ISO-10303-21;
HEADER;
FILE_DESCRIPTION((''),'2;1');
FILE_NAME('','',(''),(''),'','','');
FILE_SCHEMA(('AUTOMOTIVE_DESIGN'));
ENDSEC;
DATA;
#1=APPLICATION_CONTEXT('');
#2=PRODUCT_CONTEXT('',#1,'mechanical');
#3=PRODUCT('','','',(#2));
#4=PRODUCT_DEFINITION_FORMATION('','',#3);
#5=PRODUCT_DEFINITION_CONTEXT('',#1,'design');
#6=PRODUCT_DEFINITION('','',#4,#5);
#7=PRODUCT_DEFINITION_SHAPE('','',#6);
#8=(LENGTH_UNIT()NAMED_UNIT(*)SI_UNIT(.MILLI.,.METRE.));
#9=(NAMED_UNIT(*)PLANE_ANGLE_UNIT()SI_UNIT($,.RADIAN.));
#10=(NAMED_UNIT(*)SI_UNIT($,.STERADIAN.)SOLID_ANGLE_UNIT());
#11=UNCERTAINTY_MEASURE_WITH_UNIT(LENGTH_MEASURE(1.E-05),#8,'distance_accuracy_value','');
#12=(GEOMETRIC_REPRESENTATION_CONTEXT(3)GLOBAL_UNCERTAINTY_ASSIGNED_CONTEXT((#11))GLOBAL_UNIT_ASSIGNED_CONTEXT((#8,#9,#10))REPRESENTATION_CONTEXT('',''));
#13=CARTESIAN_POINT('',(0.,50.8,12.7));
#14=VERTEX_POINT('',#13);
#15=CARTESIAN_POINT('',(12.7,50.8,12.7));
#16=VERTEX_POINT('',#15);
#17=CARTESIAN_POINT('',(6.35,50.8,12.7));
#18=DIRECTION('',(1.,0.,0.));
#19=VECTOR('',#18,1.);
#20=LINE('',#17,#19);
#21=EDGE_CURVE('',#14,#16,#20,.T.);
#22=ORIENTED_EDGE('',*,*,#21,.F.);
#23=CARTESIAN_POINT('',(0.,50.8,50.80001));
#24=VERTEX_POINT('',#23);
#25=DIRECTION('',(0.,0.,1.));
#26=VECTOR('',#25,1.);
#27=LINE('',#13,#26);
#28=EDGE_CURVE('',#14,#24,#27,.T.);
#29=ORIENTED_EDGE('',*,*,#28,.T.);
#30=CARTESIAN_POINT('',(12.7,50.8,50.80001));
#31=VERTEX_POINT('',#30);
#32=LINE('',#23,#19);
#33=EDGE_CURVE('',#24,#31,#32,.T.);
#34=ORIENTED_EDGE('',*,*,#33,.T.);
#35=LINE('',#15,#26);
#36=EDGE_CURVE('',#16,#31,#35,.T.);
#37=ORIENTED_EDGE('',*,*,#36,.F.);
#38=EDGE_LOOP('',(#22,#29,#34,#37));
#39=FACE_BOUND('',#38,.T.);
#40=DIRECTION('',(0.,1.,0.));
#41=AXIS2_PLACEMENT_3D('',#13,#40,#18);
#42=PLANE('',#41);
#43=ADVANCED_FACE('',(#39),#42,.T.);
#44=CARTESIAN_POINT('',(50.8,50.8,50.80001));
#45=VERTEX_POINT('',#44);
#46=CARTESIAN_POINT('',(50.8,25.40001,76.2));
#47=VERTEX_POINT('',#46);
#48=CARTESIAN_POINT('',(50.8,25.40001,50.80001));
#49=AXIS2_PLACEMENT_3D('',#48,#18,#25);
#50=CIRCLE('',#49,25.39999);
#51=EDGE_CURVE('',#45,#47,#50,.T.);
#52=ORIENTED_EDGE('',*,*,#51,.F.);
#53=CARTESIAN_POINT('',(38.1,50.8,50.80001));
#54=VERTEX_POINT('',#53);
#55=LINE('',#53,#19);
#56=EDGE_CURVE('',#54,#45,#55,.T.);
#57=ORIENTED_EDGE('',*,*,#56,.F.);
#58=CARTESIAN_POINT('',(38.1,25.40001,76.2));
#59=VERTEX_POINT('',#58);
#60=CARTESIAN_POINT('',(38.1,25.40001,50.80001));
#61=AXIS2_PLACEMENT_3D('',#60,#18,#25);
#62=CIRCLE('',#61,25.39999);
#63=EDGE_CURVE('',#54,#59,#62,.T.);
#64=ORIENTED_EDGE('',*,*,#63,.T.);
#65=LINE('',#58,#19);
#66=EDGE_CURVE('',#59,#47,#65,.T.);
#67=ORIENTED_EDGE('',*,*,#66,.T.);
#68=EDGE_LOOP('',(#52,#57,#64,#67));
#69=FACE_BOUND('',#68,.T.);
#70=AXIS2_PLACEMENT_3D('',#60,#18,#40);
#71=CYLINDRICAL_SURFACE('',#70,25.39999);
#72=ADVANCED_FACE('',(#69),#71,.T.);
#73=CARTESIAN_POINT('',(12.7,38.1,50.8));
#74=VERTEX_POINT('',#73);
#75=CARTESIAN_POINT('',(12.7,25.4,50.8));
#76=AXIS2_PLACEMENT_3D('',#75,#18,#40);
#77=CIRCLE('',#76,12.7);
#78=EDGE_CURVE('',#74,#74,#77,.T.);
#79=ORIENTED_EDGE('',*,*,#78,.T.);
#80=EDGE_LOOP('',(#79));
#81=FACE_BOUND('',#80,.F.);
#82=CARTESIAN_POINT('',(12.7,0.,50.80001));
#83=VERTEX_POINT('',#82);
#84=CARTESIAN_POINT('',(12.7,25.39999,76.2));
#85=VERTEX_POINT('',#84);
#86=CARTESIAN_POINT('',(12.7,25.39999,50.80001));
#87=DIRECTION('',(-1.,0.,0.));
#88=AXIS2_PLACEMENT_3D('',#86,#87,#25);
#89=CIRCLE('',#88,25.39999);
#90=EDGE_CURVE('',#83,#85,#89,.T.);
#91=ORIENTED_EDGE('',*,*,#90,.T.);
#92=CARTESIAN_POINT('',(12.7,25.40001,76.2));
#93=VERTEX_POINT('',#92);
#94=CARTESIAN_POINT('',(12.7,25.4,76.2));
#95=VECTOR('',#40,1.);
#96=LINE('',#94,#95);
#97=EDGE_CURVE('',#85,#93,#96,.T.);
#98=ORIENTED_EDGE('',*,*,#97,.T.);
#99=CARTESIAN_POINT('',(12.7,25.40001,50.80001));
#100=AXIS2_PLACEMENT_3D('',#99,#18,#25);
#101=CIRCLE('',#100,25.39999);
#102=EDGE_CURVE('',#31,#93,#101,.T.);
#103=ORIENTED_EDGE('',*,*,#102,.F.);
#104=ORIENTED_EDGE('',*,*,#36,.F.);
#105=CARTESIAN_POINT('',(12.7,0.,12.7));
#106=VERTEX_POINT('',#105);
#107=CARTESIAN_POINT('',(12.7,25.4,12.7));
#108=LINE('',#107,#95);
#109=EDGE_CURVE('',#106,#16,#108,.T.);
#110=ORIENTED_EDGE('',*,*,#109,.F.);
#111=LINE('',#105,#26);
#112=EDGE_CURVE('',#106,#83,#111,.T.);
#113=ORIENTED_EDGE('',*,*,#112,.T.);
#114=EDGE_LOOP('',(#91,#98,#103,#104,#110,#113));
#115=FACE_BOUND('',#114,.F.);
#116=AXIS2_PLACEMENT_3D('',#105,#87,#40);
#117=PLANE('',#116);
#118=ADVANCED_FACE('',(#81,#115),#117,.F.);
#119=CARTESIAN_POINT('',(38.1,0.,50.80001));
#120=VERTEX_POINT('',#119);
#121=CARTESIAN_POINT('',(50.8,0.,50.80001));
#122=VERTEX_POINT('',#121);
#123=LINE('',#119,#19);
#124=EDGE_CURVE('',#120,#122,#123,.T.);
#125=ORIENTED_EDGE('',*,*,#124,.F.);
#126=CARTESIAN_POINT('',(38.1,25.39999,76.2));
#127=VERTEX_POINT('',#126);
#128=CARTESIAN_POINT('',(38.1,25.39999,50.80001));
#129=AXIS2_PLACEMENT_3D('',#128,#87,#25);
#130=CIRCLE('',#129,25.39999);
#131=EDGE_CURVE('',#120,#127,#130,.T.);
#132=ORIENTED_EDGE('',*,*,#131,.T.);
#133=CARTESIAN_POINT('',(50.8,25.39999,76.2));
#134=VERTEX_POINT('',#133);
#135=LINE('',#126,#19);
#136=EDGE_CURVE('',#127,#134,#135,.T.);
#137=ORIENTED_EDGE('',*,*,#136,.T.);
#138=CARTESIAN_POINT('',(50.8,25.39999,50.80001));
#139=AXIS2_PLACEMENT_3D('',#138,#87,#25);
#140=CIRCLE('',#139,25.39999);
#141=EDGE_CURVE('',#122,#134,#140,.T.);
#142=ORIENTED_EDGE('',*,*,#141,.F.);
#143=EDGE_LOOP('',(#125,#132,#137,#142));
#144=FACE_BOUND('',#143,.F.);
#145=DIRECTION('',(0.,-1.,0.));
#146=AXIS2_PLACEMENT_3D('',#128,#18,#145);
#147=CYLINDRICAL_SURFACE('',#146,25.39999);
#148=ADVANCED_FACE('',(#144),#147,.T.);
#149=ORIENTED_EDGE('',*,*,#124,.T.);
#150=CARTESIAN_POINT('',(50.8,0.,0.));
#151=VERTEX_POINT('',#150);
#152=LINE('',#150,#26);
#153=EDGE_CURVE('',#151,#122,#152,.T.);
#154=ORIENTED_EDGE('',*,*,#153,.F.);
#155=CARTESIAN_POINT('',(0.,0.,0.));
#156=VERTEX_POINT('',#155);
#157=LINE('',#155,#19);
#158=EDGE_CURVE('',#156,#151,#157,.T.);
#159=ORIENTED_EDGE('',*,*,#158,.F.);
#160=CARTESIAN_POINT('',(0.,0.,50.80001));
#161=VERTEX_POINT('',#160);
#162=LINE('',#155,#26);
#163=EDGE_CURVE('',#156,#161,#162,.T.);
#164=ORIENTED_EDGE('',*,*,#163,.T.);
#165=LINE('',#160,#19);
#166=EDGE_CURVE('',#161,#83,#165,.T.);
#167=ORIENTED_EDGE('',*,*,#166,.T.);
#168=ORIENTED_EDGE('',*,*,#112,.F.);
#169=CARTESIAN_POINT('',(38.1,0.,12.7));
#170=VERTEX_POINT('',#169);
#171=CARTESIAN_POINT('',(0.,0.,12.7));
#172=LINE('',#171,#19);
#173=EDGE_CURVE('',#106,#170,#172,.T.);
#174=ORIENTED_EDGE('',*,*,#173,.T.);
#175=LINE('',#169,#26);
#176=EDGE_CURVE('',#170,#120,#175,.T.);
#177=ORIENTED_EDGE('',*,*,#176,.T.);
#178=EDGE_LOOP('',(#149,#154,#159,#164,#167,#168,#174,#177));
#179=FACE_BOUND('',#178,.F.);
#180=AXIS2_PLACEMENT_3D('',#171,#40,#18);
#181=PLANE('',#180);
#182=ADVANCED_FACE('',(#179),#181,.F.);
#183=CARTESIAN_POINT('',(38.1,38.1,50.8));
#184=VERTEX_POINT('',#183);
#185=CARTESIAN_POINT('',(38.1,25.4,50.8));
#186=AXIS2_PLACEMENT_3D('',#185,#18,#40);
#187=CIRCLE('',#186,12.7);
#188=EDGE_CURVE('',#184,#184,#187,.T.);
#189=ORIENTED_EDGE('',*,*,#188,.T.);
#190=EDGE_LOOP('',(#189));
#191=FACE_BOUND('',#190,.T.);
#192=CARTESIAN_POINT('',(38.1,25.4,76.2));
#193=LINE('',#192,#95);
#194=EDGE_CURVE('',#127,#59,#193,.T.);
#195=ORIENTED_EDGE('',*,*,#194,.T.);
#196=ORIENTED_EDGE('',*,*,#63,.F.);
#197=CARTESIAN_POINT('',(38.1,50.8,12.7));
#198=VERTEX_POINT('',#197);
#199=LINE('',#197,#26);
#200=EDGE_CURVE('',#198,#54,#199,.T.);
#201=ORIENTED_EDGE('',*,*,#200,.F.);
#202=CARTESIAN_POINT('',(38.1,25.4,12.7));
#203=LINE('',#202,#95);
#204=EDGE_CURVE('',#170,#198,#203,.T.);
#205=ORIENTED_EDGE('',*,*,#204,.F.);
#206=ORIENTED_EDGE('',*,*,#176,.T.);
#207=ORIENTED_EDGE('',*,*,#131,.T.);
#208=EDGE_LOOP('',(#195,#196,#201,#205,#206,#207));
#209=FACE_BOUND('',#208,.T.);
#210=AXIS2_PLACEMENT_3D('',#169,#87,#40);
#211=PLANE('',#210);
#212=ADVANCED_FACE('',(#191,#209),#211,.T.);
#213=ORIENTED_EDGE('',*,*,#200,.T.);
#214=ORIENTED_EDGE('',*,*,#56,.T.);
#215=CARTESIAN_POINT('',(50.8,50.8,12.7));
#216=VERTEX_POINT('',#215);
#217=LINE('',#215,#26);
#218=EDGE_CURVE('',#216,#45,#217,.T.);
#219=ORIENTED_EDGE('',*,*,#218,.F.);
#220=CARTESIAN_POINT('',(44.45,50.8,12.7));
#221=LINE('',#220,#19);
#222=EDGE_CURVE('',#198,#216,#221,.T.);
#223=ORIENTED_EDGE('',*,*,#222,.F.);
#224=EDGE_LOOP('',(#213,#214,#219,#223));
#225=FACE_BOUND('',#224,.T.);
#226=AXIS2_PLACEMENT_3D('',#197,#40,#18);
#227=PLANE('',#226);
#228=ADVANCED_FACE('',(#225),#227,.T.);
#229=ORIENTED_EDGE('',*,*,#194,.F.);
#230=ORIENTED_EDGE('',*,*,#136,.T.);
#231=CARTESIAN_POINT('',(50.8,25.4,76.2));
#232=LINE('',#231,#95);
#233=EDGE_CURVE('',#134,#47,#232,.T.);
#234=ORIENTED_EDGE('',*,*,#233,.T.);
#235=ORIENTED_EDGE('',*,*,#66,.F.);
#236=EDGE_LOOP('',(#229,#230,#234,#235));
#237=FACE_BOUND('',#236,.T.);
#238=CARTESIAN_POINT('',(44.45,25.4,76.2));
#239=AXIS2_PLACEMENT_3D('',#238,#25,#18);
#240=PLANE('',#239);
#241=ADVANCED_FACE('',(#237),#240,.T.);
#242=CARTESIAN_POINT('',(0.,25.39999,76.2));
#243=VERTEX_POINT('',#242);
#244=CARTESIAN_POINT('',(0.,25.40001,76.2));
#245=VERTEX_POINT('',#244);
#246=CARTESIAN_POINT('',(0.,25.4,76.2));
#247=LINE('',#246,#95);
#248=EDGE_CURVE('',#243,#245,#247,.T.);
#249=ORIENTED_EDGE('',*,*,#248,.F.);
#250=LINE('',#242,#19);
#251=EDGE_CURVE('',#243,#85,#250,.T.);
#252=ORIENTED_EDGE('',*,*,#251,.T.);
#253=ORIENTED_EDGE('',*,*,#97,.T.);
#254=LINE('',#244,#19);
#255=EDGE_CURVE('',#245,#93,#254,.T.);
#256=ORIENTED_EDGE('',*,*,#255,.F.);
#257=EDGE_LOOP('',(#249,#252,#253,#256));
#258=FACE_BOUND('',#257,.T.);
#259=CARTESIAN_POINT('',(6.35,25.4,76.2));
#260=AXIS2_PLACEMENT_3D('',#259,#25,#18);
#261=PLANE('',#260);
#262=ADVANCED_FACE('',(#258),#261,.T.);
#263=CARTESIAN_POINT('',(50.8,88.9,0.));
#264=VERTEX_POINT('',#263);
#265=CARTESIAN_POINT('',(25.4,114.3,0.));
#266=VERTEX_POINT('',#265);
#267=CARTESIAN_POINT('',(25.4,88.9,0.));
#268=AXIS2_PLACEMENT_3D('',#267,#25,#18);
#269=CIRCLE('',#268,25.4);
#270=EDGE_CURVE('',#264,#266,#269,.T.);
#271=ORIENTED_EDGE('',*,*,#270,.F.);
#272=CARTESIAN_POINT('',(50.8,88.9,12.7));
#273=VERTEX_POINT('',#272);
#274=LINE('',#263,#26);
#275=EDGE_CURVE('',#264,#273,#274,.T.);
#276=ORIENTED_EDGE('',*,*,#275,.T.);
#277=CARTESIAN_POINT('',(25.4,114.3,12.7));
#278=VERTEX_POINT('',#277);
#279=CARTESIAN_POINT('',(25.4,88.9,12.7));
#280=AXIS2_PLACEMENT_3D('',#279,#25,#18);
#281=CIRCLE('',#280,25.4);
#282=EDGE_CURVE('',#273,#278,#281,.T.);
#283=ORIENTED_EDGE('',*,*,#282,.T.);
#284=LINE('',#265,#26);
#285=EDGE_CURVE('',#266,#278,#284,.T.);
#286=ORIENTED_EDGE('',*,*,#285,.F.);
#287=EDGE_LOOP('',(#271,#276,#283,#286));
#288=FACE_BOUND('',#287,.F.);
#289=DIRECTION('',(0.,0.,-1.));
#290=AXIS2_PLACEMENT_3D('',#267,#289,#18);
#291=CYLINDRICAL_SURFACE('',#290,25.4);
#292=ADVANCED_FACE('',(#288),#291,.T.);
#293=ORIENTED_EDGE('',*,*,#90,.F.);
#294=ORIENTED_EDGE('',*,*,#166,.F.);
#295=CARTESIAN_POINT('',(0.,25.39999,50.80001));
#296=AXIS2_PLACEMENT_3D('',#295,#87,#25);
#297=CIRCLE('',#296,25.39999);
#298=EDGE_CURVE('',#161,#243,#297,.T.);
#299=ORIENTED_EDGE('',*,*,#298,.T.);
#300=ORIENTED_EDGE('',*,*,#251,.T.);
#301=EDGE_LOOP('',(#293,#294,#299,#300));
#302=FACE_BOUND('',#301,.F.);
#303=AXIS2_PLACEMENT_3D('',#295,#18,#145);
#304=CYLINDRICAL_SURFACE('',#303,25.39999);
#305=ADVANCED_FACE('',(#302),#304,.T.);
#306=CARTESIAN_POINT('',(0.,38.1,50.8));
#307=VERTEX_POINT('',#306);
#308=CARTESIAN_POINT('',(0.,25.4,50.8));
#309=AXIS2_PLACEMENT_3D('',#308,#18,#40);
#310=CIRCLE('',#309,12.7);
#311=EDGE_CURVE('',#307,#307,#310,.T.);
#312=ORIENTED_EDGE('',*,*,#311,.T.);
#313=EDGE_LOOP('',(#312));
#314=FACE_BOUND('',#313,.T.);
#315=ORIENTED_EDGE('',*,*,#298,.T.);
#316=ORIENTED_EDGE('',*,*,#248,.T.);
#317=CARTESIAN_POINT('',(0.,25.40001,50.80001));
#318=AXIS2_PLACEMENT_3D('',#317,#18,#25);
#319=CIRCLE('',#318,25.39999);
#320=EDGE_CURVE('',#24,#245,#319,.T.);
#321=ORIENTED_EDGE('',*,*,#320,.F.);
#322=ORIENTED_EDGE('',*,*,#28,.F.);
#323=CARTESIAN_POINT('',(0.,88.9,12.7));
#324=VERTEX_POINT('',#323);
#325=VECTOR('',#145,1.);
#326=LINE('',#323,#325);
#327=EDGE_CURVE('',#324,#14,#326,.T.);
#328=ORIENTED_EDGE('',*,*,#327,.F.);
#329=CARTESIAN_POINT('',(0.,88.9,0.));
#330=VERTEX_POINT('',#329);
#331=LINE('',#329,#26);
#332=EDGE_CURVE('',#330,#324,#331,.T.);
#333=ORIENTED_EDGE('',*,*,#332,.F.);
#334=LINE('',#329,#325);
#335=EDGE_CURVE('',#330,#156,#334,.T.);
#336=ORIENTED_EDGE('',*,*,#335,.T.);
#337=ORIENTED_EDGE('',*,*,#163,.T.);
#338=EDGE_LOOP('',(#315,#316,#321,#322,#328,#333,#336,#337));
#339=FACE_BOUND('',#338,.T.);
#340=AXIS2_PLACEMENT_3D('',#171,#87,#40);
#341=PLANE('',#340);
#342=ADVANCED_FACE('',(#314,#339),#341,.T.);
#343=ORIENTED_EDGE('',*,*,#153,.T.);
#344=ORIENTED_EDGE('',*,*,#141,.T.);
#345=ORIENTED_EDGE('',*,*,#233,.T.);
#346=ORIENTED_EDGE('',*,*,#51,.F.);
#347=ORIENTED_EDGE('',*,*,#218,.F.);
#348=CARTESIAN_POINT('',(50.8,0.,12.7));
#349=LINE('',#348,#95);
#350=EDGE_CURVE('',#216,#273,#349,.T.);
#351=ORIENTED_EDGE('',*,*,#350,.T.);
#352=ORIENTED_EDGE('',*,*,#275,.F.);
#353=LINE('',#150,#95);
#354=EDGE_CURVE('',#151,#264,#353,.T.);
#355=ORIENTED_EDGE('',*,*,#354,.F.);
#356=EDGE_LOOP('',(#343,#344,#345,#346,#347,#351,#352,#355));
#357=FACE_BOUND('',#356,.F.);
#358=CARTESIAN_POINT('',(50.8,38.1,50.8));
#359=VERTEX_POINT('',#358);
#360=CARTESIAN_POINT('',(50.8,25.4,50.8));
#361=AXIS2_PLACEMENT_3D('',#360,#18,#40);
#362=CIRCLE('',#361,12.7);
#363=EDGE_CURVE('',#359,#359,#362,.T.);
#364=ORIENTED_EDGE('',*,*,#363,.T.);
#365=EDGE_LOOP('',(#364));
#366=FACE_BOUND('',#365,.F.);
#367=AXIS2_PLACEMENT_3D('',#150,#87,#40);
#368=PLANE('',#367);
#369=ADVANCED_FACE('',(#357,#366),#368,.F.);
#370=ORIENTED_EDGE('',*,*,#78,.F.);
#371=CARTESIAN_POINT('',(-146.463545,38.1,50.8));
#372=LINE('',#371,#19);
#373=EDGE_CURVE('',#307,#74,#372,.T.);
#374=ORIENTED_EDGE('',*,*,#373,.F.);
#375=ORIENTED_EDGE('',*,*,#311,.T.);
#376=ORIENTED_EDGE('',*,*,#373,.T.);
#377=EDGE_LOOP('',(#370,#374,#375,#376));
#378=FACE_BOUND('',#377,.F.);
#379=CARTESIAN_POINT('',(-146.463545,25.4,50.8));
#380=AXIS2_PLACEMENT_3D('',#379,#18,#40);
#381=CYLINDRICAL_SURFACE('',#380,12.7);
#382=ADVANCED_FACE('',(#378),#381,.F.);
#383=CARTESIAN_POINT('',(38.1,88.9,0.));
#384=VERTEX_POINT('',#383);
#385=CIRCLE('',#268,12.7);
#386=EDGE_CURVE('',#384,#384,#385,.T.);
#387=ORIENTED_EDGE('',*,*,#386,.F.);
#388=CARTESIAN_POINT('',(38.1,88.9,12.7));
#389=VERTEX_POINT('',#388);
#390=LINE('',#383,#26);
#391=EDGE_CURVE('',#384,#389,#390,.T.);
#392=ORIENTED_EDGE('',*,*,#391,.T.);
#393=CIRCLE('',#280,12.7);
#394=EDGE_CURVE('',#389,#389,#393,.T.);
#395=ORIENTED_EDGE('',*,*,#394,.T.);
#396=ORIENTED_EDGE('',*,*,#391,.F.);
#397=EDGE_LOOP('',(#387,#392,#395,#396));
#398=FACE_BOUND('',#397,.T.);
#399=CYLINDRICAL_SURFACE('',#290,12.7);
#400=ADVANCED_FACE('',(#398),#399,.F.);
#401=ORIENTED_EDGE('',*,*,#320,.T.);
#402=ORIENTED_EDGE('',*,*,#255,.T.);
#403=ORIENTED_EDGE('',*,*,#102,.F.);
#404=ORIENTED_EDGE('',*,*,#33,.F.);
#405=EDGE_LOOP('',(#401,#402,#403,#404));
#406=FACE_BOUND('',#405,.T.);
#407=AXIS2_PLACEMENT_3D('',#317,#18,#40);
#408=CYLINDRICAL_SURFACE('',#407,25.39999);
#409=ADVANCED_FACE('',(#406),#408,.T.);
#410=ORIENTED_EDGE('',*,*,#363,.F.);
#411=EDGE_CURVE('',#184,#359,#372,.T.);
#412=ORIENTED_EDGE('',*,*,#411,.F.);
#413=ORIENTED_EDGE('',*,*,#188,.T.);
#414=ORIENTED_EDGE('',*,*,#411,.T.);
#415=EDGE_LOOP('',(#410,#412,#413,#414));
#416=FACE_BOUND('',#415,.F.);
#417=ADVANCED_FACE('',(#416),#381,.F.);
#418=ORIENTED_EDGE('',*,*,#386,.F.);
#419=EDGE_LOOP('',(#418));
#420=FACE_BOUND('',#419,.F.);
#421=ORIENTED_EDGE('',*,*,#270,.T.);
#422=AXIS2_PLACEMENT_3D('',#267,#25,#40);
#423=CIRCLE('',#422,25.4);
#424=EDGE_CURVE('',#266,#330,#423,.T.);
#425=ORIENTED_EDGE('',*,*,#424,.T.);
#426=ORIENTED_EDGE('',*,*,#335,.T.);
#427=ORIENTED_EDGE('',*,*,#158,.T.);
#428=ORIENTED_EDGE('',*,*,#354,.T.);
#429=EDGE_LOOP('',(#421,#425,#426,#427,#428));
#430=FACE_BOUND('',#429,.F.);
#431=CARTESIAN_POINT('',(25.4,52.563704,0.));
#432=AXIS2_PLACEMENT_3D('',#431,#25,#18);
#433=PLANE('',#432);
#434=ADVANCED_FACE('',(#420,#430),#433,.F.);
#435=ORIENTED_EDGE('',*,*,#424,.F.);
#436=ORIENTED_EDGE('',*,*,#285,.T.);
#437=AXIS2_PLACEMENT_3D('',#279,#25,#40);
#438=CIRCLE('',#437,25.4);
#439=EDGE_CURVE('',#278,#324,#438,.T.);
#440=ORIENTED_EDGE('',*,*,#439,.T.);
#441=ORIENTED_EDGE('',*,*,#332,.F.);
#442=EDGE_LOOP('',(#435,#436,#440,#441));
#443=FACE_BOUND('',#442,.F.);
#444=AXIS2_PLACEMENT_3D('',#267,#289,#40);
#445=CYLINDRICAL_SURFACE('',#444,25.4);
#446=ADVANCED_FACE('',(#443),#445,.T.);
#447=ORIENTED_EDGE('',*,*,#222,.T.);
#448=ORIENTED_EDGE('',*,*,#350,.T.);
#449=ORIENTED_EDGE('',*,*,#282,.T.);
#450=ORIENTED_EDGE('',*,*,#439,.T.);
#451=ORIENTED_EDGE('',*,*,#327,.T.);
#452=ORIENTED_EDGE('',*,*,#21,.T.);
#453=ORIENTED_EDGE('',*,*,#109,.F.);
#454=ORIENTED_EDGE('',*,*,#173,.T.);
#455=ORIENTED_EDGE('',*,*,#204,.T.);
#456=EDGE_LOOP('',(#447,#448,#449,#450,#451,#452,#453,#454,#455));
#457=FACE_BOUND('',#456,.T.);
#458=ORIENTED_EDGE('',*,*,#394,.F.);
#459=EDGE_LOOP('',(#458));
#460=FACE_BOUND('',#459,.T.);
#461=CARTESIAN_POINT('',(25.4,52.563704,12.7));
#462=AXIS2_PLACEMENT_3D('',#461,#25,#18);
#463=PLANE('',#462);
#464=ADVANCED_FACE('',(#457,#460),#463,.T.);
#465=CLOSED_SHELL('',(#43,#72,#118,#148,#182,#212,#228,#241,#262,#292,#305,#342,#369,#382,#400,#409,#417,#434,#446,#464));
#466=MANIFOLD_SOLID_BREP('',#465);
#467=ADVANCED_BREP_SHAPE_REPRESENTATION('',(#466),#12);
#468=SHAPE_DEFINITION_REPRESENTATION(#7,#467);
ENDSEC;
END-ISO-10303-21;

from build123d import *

# Parameters (mm, degrees)
F0_R     = 12.7
F1_DEPTH = 12.7
F2_W     = 12.7
F2_H     = 50.8
F3_DEPTH = 63.5
F4_R     = 25.39999
F6_D     = 25.4


# Not quite as in the source:
# - a fillet or chamfer is up to 0.001 mm smaller than in the source, because OpenCascade refuses the exact size


with BuildPart() as f1:
    # F0 (on Top) → F1 (new body)
    with BuildSketch(Plane.XY):
        with BuildLine():
            Line((0, 88.9), (0, 0))
            Line((0, 0), (50.8, 0))
            Line((50.8, 0), (50.8, 88.9))
            ThreePointArc((50.8, 88.9), (43.3605122421, 106.8605122421), (25.4, 114.3))
            ThreePointArc((25.4, 114.3), (7.4394877579, 106.8605122421), (0, 88.9))
        make_face()
        with Locations((25.4, 88.9)):
            Circle(F0_R, mode=Mode.SUBTRACT)
    extrude(amount=F1_DEPTH)

    # F2 (on face) → F3 (join)
    with BuildSketch(Plane.XY.offset(12.7)):
        with Locations((6.35, 25.4)):
            Rectangle(F2_W, F2_H)
        with Locations((44.45, 25.4)):
            Rectangle(F2_W, F2_H)
    extrude(amount=F3_DEPTH)

    # F4 (radius 25.4 in the source; OpenCascade refuses exactly that, so slightly less here)
    f4_edges = [f1.edges().sort_by_distance(p)[0] for p in [
        (6.35, 50.8, 76.2),
        (6.35, 0, 76.2),
        (44.45, 0, 76.2),
        (44.45, 50.8, 76.2),
    ]]
    fillet(f4_edges, radius=F4_R)

    # F6 (through all)
    with Locations(Plane(origin=(0, 0, 0), x_dir=(0, -1, 0), z_dir=(-1, 0, 0))):
        with Locations((-25.4, 50.8)):
            Hole(F6_D / 2)


solid = f1.part
